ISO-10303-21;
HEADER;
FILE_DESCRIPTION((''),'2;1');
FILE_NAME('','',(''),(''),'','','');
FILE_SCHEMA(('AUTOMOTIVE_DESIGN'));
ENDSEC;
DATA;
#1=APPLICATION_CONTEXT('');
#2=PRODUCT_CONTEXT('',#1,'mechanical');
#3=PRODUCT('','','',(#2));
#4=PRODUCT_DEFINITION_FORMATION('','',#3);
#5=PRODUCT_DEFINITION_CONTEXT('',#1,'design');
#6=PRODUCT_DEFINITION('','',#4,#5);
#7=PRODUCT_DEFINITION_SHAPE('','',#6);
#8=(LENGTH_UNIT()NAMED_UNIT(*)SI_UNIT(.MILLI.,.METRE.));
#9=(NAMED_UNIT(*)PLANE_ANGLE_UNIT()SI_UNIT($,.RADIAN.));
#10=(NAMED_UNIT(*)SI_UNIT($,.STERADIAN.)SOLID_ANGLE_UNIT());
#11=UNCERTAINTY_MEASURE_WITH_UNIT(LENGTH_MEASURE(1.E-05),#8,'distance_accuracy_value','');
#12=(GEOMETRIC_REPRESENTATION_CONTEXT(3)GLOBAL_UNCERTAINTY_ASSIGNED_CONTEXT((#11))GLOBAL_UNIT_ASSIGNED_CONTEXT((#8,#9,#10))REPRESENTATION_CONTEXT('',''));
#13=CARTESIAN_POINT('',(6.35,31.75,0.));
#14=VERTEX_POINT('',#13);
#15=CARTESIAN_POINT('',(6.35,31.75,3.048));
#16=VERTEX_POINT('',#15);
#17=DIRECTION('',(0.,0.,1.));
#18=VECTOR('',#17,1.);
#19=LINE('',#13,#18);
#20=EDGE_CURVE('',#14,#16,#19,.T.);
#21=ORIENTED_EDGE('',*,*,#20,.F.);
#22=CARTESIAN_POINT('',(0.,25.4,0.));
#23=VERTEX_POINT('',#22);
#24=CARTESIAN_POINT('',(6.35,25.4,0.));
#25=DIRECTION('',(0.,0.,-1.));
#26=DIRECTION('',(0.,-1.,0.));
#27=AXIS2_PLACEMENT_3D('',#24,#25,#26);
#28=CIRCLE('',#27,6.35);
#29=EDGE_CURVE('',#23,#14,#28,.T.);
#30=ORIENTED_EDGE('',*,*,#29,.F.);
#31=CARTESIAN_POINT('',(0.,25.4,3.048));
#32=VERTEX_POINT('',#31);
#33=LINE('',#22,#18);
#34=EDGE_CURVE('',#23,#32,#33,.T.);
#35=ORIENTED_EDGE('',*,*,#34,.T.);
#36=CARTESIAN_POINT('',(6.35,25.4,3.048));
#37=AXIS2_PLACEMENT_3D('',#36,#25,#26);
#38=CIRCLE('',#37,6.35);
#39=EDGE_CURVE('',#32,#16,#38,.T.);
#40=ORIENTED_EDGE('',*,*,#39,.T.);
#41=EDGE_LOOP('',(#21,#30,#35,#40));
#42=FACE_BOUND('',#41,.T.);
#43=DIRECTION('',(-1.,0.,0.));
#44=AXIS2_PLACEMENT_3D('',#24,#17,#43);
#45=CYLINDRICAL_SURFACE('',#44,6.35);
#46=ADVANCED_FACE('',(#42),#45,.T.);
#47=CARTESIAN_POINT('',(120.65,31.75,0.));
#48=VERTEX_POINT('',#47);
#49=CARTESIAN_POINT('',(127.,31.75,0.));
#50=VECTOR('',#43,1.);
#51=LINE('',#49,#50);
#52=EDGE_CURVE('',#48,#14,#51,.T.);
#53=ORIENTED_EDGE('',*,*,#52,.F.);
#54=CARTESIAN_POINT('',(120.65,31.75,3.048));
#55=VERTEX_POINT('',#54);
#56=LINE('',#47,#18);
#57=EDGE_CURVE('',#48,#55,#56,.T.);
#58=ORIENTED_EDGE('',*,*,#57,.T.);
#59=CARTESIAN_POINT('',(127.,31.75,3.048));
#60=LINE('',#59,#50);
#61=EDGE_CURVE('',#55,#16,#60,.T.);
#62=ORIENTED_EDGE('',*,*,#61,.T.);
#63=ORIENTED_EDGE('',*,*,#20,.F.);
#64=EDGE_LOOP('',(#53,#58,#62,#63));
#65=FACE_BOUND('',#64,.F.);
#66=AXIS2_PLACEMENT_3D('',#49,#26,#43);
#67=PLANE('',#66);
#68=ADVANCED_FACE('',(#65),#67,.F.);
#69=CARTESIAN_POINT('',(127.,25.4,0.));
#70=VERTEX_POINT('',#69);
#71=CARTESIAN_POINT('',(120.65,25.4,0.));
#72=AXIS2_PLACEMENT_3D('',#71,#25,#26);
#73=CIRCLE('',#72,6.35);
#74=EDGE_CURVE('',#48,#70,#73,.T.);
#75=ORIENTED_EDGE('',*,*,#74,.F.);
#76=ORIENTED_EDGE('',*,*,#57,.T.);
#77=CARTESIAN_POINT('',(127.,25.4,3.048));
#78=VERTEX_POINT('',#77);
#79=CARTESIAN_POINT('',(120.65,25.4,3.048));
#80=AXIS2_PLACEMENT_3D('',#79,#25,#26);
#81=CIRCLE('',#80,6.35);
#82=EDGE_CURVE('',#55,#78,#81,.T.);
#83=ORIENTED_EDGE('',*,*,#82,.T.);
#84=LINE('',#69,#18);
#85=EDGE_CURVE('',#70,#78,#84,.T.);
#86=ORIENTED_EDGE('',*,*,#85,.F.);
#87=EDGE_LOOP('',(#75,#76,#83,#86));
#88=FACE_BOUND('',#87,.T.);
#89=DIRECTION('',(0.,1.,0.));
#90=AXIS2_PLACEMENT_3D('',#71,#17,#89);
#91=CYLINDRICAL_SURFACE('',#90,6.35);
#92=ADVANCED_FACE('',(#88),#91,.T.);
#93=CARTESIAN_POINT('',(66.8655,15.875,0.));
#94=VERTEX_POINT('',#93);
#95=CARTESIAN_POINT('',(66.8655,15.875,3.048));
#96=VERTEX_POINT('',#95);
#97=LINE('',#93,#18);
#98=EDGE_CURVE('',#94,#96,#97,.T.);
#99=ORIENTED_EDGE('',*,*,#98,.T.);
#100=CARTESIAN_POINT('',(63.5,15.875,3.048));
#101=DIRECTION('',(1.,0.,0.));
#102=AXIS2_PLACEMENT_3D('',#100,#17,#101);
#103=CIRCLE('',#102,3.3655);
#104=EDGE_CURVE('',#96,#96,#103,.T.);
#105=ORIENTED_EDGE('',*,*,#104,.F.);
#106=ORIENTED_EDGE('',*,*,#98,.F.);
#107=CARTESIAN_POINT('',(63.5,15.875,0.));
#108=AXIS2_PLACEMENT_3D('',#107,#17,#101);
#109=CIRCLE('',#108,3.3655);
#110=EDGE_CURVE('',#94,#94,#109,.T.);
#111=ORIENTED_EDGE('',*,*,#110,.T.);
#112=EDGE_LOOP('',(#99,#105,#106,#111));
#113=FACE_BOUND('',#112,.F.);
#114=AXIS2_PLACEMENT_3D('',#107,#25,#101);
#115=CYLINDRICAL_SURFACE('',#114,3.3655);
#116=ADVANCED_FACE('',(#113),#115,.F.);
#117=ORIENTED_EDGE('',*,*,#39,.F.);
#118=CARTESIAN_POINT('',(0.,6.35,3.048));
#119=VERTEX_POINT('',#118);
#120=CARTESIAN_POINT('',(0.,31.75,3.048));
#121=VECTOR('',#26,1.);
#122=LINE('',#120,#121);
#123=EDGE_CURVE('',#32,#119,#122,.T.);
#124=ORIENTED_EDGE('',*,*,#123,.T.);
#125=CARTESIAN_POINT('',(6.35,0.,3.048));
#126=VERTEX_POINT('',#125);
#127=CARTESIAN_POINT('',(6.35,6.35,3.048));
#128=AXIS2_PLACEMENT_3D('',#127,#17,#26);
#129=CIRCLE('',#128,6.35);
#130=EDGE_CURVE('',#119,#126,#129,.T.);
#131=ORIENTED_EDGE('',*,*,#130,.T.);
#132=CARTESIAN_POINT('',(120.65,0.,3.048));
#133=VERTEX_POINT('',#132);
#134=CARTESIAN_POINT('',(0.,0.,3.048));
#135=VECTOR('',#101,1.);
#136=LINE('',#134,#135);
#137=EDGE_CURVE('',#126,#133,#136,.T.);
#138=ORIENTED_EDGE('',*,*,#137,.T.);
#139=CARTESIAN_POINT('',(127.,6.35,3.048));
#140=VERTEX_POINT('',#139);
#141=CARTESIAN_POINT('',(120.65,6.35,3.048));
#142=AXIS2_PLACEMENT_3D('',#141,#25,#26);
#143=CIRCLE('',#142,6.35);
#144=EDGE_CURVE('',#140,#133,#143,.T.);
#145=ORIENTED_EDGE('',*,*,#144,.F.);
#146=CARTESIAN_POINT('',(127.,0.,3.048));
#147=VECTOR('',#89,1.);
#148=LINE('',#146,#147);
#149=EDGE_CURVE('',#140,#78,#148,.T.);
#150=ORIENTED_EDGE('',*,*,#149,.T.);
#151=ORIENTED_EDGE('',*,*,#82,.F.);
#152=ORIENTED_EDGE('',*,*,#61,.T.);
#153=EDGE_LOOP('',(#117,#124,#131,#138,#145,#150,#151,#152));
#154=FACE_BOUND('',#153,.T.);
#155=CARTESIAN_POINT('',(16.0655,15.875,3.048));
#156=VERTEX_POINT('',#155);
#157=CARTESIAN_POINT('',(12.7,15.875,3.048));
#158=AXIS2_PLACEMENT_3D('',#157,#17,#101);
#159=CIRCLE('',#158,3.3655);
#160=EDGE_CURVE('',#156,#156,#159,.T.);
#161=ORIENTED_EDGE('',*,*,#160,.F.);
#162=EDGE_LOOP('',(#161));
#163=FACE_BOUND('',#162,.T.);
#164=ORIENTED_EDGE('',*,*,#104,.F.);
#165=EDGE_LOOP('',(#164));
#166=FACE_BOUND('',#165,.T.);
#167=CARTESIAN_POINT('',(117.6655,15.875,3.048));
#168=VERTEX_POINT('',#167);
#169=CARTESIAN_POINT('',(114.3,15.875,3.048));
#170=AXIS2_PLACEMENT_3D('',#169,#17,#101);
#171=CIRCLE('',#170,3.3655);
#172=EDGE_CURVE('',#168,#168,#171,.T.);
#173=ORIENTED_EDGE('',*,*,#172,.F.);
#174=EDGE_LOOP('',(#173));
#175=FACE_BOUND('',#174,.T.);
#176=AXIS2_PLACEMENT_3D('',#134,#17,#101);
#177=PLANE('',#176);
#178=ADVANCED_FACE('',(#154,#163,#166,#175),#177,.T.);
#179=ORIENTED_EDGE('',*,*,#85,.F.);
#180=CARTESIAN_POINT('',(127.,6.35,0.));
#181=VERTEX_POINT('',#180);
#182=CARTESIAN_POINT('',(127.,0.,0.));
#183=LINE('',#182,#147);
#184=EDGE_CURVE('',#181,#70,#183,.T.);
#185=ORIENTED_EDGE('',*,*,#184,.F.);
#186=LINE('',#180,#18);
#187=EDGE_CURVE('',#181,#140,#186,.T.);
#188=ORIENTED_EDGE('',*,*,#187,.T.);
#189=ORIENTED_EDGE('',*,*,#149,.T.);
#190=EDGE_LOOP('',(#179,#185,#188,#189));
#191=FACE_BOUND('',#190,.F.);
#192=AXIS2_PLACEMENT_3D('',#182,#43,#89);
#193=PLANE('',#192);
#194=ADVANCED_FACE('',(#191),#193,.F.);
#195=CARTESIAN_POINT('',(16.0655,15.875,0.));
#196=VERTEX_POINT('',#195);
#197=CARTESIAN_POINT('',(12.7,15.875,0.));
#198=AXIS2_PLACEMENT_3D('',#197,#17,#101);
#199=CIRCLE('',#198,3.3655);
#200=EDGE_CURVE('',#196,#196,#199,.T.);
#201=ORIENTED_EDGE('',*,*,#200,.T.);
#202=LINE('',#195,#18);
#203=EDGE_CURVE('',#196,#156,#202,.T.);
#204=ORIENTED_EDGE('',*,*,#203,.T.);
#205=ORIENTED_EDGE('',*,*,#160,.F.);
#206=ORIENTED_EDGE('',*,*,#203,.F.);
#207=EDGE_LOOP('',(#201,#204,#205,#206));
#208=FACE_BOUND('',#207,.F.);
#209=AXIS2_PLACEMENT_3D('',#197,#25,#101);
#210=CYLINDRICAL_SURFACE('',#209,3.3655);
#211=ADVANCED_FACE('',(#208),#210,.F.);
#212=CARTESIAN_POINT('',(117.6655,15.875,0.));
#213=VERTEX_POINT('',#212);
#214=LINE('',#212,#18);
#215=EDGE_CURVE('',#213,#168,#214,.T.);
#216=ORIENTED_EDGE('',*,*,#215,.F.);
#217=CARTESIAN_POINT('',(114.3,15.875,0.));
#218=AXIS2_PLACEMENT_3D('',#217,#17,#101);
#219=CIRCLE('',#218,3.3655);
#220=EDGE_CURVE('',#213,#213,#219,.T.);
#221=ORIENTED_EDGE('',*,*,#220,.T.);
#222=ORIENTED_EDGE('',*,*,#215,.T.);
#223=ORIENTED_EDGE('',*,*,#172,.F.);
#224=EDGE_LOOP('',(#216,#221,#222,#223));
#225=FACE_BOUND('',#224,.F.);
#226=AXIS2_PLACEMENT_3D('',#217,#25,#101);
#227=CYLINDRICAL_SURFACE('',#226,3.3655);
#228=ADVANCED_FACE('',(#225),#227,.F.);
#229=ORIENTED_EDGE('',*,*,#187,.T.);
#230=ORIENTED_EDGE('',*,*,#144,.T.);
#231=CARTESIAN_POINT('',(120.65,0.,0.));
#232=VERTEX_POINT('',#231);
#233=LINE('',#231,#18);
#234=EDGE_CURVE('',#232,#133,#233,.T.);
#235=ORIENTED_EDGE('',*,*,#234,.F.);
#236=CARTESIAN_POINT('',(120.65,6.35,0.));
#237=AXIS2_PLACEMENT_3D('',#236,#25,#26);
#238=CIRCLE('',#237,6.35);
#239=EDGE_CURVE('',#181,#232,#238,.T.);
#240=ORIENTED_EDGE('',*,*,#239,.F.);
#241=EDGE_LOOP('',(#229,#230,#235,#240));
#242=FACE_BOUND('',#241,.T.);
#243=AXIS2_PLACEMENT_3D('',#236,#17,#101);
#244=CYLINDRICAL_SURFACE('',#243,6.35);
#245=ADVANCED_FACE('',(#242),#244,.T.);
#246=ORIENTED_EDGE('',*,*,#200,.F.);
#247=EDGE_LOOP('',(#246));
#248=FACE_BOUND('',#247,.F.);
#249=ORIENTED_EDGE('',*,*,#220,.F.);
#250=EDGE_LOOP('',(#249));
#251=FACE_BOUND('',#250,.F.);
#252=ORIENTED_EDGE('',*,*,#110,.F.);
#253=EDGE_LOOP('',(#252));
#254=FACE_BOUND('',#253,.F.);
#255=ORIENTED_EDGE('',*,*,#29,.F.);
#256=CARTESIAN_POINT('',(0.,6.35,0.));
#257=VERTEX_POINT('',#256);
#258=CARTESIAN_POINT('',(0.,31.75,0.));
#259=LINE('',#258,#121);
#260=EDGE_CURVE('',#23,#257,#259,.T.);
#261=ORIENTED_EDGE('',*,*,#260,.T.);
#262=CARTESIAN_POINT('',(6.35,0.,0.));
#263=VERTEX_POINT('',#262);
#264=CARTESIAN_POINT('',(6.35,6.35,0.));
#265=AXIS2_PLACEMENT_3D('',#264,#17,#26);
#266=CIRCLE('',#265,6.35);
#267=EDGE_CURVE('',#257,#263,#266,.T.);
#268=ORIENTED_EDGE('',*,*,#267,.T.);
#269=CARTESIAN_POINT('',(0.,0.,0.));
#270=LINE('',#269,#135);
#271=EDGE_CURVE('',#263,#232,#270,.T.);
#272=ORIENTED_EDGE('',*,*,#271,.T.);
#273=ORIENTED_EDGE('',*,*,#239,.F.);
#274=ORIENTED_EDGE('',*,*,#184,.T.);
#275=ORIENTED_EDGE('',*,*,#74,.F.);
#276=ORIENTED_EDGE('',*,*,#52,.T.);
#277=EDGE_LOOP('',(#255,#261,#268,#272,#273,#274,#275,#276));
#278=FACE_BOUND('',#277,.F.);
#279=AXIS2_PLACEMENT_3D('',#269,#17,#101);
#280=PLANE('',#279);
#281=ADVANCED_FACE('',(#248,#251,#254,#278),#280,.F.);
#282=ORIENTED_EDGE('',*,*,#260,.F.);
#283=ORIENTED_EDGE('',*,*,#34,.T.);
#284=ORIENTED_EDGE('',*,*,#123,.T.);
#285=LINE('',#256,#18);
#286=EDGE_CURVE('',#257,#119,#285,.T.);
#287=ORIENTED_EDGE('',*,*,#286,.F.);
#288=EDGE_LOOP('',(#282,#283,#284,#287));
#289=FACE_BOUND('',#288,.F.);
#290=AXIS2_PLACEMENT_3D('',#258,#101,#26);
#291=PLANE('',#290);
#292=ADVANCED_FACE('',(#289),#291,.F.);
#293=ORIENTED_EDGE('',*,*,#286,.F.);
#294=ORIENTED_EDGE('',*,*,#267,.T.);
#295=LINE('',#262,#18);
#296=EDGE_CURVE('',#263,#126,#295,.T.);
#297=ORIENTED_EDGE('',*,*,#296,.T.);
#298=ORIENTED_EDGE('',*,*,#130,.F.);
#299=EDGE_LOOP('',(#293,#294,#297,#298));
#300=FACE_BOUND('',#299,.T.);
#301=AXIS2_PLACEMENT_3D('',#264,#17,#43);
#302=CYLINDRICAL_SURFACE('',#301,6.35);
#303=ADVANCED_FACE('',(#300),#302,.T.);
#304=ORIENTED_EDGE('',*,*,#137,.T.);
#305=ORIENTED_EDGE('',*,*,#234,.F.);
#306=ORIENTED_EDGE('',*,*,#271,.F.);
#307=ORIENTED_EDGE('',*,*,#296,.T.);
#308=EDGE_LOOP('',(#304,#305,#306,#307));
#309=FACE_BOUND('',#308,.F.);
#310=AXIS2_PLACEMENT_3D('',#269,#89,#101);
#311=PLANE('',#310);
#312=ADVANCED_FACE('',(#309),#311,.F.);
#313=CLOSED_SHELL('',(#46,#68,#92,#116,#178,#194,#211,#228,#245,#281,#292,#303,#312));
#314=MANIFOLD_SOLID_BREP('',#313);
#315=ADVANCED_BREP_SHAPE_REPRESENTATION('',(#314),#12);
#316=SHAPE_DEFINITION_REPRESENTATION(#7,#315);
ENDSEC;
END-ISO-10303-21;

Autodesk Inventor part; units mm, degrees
ref_plane "YZ Plane" through (0, 0, 0) normal (1, 0, 0) x (0, 1, 0)
ref_plane "XZ Plane" through (0, 0, 0) normal (0, 1, 0) x (-1, 0, 0)
ref_plane "XY Plane" through (0, 0, 0) normal (0, 0, 1) x (1, 0, 0)
sketch "Sketch1" plane through (0, 0, 0) normal (0, 0, 1) x (1, 0, 0)
  line L0 (0, 0) -> (127, 0)
  line L1 (127, 0) -> (127, 31.75)
  line L2 (127, 31.75) -> (0, 31.75)
  line L3 (0, 31.75) -> (0, 0)
  circle A0 centre (114.3, 15.875) radius 3.3655
  circle A1 centre (63.5, 15.875) radius 3.3655
  circle A2 centre (12.7, 15.875) radius 3.3655
  dimension "d0" = 127
  dimension "d1" = 31.75
  dimension "d2" = 6.731
  dimension "d3" = 12.7
  dimension "d4" = 15.875
  dimension "d7" = 50.8
extrude "Plate1" add sketch "Sketch1" along normal blind 3.048
fillet "Corner Round1" radius 6.35 4 edges at (0, 31.75, 1.524) (0, 0, 1.524) (127, 31.75, 1.524) (127, 0, 1.524)
equation "\"d4\" = 0.5 * d1"
equation "\"BendRadius\" = Thickness"
equation "\"BendReliefWidth\" = Thickness"
equation "\"BendReliefDepth\" = 0.5 * Thickness"
equation "\"CornerReliefSize\" = 4 * Thickness"
equation "\"MinimumRemnant\" = 2 * Thickness"
equation "\"TransitionRadius\" = BendRadius"
equation "\"JacobiRadiusSize\" = BendRadius"
equation "\"GapSize\" = Thickness"
equation "\"d12\" = BendRadius"
equation "\"Thickness\" = 3.048"
properties part number "Super1"
